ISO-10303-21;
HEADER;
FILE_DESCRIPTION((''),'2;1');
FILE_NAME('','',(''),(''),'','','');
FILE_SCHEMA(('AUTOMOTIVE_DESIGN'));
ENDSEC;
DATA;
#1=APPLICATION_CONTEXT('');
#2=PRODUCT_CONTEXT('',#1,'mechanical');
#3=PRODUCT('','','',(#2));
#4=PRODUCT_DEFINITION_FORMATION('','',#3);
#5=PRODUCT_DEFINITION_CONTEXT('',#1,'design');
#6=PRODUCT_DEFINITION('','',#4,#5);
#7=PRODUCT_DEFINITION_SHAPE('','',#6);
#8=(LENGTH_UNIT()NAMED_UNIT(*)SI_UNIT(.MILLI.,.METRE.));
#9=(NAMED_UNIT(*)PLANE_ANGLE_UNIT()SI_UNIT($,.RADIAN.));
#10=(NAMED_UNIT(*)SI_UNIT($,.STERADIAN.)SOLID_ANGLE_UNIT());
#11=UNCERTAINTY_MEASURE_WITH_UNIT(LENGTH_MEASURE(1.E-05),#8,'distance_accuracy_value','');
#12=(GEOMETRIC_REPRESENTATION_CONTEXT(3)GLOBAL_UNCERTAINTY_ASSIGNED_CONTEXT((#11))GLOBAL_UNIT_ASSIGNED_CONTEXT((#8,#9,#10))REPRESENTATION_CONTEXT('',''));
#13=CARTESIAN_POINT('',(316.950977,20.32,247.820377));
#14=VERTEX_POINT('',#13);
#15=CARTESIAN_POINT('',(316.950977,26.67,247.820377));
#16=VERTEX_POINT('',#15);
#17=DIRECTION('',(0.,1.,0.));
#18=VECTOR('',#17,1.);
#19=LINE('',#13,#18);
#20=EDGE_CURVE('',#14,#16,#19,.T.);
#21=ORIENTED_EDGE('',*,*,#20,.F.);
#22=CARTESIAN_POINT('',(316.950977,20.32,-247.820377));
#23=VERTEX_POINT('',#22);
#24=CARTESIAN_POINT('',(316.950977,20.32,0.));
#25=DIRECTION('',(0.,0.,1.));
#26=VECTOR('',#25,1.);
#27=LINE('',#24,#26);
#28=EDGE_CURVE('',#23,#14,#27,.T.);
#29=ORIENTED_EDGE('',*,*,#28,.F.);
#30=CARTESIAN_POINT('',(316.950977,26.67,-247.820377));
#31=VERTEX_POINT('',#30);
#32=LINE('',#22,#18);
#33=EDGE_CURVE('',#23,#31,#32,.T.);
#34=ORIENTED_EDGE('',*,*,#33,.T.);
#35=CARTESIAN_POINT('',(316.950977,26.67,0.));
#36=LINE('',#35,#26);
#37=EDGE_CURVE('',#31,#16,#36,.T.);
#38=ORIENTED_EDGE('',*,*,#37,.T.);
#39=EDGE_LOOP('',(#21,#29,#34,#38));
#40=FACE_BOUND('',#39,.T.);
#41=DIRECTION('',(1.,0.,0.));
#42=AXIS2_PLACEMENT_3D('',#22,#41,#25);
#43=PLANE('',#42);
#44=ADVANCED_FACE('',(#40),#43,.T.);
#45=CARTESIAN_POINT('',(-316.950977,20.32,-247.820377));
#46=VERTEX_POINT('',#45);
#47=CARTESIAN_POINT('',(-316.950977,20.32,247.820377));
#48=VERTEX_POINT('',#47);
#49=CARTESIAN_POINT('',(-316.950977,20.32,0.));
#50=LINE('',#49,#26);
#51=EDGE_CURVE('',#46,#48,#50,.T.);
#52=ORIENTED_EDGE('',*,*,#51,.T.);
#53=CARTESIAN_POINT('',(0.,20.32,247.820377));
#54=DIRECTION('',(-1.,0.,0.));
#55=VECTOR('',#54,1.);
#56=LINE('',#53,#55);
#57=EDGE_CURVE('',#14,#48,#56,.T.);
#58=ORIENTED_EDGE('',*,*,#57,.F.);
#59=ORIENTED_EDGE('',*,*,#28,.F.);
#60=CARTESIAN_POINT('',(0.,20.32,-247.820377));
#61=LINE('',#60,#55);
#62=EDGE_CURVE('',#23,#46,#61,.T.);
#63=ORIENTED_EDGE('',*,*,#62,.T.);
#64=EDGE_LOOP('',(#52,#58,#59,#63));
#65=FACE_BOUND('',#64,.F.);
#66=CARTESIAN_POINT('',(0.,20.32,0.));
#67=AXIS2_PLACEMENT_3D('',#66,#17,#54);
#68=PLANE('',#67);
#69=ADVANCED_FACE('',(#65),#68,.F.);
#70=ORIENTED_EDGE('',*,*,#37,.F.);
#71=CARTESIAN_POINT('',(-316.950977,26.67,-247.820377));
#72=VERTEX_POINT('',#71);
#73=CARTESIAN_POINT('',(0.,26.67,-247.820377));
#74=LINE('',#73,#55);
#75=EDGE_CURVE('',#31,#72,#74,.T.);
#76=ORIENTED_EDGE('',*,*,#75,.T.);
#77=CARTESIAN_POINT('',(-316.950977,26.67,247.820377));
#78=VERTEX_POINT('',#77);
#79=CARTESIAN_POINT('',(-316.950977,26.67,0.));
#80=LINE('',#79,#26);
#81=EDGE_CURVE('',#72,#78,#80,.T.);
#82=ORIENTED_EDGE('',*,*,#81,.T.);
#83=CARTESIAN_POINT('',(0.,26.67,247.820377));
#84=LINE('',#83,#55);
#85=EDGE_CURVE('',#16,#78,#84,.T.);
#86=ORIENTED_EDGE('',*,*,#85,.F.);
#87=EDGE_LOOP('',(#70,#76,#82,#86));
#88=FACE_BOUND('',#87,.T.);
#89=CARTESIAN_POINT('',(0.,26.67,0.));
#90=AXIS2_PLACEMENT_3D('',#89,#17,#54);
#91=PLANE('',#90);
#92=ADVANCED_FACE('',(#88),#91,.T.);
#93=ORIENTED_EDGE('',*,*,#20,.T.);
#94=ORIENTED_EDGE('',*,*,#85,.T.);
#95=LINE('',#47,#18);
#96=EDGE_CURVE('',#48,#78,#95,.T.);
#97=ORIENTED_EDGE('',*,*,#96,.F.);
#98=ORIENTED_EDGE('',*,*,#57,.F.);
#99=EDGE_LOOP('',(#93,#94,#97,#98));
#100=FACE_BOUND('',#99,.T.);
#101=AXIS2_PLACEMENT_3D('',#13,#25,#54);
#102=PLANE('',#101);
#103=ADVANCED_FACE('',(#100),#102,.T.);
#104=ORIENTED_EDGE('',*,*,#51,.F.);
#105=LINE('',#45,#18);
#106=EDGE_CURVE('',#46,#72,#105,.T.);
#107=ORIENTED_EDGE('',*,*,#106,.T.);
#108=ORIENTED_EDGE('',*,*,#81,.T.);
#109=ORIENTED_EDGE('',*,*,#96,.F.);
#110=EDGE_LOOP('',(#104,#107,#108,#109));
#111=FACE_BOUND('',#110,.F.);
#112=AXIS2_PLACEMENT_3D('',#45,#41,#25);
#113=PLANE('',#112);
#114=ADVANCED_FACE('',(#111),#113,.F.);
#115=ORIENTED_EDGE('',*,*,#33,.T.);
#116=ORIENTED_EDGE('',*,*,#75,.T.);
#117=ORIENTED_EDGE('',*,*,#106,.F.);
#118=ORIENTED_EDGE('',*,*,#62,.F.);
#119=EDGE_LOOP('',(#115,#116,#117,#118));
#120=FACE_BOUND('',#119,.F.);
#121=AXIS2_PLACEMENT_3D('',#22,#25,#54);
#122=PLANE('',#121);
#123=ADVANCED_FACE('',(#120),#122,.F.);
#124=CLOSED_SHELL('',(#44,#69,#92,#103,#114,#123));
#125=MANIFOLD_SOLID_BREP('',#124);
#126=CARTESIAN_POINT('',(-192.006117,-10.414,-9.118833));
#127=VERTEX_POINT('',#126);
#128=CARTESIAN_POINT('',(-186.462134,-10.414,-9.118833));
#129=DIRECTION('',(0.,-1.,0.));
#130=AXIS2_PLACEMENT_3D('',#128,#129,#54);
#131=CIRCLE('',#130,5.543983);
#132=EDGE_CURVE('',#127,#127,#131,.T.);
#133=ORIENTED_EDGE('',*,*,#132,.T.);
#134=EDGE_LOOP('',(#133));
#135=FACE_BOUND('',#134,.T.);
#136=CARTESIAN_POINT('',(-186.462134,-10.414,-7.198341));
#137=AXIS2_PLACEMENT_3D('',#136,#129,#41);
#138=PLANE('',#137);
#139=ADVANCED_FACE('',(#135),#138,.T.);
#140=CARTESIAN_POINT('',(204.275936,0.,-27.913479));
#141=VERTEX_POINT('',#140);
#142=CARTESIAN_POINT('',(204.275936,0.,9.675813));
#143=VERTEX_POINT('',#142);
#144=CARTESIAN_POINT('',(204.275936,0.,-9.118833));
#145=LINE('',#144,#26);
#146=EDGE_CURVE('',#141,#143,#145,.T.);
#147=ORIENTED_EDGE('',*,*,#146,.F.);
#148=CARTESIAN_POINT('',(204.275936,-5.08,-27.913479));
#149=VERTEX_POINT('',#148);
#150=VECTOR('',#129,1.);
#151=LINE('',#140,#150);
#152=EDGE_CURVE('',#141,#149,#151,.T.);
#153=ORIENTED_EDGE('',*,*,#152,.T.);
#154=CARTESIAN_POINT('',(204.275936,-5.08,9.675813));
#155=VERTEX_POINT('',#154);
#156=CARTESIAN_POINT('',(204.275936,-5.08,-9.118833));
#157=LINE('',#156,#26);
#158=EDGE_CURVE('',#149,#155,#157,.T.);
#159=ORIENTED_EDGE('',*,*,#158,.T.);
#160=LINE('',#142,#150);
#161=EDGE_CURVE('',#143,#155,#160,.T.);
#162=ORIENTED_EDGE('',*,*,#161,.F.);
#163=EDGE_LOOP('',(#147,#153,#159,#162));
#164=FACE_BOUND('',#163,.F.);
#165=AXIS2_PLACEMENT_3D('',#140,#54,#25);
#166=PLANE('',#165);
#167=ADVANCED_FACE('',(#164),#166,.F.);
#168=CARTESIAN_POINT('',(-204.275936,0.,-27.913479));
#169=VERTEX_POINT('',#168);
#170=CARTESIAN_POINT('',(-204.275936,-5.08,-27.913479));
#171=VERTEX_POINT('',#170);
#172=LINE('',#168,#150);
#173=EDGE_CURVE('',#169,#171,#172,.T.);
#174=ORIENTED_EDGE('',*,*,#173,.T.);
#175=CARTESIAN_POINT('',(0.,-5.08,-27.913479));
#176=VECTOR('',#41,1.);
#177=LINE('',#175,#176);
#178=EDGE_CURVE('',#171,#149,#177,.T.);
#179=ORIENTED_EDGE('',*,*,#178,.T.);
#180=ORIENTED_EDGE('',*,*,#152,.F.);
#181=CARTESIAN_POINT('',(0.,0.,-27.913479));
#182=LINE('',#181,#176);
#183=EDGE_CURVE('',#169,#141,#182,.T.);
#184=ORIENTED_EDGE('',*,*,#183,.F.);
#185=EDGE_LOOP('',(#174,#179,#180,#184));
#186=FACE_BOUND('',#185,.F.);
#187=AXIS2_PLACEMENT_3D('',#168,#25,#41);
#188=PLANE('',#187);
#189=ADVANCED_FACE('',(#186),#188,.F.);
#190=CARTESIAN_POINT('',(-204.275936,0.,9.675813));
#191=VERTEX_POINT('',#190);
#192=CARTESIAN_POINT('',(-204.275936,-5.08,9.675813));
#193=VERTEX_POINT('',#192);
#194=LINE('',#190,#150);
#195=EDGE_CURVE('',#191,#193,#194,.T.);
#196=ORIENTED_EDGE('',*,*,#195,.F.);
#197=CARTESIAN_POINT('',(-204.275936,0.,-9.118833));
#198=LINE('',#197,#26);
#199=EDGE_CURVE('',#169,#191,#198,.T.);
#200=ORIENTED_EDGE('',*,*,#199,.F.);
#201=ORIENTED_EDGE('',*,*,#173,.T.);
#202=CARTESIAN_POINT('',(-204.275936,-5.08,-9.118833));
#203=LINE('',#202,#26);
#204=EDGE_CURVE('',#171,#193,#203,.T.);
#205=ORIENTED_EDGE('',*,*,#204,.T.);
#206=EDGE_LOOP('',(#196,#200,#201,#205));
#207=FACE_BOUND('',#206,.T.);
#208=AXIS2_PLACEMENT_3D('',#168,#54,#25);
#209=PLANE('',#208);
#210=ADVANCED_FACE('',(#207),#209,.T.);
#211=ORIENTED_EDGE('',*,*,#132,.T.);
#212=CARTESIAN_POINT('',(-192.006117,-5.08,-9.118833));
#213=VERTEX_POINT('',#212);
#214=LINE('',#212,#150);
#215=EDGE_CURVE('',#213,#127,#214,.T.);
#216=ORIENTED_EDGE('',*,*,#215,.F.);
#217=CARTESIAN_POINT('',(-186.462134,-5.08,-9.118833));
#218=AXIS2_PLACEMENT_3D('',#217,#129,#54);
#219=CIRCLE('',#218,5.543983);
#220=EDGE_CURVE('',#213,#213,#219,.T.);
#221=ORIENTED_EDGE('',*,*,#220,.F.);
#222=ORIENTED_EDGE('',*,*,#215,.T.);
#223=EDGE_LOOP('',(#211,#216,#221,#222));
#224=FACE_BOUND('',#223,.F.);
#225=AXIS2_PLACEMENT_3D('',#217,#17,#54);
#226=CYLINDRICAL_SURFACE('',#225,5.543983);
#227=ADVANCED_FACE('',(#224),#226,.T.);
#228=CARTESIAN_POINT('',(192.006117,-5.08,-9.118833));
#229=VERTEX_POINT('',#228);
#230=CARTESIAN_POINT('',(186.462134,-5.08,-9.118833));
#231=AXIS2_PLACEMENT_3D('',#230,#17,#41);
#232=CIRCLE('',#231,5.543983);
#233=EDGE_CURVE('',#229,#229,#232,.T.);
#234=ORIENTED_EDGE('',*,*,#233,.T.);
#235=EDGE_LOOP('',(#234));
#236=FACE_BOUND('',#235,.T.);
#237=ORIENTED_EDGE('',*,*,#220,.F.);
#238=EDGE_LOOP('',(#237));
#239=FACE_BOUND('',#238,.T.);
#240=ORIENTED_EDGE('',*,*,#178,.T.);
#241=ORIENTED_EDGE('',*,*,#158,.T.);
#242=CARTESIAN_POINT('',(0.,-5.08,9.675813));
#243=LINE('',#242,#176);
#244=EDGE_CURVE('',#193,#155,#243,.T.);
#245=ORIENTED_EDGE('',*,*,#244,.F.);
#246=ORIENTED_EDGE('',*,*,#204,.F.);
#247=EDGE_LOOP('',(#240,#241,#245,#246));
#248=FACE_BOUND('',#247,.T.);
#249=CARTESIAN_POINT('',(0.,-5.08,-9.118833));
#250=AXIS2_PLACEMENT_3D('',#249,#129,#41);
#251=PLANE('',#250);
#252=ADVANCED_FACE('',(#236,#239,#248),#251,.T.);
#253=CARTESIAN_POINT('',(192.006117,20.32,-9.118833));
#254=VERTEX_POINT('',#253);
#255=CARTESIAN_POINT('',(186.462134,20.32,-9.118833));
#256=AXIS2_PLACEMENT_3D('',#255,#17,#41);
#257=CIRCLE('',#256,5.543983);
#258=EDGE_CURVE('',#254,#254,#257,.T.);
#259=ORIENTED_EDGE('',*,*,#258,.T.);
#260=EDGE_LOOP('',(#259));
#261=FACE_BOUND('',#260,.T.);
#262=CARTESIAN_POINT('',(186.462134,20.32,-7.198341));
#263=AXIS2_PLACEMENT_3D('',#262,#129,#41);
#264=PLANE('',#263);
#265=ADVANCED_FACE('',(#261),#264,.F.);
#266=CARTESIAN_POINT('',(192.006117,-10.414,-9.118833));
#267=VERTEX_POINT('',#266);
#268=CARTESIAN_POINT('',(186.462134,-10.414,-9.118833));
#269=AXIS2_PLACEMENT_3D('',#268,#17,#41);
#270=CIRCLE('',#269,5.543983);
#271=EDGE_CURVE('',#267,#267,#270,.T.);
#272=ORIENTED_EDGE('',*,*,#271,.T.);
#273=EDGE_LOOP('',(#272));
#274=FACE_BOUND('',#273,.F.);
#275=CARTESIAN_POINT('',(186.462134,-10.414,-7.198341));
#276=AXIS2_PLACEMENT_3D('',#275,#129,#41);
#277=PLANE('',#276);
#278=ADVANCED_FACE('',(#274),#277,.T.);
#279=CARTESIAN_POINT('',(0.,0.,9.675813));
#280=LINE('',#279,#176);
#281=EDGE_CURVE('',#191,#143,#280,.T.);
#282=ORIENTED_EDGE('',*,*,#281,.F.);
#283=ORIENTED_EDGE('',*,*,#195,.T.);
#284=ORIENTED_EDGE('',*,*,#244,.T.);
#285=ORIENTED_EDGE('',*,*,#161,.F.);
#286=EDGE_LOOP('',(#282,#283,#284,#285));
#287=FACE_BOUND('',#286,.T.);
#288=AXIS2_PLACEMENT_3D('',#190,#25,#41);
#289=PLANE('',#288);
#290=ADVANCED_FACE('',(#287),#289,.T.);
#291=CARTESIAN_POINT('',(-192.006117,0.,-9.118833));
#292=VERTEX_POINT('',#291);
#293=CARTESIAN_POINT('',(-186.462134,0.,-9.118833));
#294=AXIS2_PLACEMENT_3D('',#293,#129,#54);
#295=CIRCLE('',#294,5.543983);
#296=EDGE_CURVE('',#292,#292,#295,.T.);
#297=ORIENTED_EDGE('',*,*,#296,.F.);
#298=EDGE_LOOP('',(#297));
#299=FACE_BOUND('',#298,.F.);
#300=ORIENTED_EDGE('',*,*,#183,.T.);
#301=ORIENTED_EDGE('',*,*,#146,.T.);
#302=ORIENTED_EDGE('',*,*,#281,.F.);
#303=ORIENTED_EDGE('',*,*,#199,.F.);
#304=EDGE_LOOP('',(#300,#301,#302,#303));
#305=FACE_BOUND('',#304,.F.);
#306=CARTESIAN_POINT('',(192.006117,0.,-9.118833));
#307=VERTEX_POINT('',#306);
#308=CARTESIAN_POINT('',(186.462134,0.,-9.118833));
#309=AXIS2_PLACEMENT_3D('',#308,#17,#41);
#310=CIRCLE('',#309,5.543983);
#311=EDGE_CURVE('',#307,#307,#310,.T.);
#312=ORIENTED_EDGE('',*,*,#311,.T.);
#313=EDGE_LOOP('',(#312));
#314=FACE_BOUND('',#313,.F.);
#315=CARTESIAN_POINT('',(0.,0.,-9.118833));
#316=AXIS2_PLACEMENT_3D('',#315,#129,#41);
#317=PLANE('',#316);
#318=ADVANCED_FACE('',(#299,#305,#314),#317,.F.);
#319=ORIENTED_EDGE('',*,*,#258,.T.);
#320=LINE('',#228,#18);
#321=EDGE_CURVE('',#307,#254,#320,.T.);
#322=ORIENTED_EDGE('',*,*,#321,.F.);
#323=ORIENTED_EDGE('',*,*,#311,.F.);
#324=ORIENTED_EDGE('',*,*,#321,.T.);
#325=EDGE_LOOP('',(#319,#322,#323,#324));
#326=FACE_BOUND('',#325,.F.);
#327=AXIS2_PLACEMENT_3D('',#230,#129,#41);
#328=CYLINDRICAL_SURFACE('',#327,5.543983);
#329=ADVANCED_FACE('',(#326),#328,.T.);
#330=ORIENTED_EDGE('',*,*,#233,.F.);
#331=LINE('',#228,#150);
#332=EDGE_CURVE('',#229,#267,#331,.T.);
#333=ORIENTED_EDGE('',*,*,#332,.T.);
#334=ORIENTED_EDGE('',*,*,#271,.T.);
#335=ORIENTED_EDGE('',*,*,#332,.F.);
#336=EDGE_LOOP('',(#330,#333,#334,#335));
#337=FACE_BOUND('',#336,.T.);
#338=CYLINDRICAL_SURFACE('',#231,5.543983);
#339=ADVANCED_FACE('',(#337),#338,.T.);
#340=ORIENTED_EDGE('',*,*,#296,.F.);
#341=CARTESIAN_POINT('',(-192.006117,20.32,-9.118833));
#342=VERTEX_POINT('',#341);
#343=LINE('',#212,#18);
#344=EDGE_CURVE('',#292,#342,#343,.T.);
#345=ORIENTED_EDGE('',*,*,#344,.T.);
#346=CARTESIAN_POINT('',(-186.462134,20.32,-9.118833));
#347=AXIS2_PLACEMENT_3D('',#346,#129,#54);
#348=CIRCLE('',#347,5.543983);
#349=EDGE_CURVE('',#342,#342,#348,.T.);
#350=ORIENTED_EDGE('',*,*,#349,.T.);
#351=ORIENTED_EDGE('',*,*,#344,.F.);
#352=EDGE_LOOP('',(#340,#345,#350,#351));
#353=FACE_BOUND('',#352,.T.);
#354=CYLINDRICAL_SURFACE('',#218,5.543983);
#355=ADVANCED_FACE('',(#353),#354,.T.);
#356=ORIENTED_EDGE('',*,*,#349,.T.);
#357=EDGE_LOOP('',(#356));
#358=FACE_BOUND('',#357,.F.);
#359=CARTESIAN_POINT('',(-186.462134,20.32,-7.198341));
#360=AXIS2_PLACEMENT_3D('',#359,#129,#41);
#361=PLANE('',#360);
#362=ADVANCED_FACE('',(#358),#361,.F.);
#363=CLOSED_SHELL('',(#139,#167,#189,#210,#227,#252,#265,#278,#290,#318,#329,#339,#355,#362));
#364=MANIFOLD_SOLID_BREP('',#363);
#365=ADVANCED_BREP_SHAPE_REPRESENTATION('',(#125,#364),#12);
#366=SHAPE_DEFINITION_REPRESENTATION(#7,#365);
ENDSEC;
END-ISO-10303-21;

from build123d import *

# Parameters (mm, degrees)
F0_W          = 408.5518717766
F0_H          = 37.5892921885
F1_DEPTH      = 5.08
F3_DEPTH      = 5.334
F3_DEPTH_BACK = 25.4
F5_W          = 633.9019536972
F5_H          = 495.6407546997
F6_DEPTH      = 6.35


with BuildPart() as f1:
    # F0 (on Front) → F1 (new body)
    with BuildSketch(Plane.XZ):
        with Locations((0, -9.1188331868)):
            Rectangle(F0_W, F0_H)
    extrude(amount=F1_DEPTH)

    # F2 (on face) → F3 (join, two sides)
    with BuildSketch(Plane.XZ.offset(5.08)) as f3_sk:
        with BuildLine():
            ThreePointArc((-180.9181509954, -9.1188331868), (-186.4621341228, -3.5748500593), (-192.0061172503, -9.1188331868))
            Line((-192.0061172503, -9.1188331868), (-180.9181509954, -9.1188331868))
        make_face()
        with BuildLine():
            Line((-180.9181509954, -9.1188331868), (-192.0061172503, -9.1188331868))
            ThreePointArc((-192.0061172503, -9.1188331868), (-186.4621341228, -14.6628163142), (-180.9181509954, -9.1188331868))
        make_face()
    extrude(amount=F3_DEPTH)
    extrude(f3_sk.sketch, amount=-F3_DEPTH_BACK)

    # F4: F1 across plane


with BuildPart() as f1_1:
    add(f1.part)
    add(f1.part.mirror(Plane.YZ))


with BuildPart() as f6:
    # F5 (on face) → F6 (new body)
    with BuildSketch(Plane(origin=(0, 20.32, 0), x_dir=(-1, 0, 0), z_dir=(0, 1, 0))):
        Rectangle(F5_W, F5_H)
    extrude(amount=F6_DEPTH)


solid = Compound([f1_1.part, f6.part])
